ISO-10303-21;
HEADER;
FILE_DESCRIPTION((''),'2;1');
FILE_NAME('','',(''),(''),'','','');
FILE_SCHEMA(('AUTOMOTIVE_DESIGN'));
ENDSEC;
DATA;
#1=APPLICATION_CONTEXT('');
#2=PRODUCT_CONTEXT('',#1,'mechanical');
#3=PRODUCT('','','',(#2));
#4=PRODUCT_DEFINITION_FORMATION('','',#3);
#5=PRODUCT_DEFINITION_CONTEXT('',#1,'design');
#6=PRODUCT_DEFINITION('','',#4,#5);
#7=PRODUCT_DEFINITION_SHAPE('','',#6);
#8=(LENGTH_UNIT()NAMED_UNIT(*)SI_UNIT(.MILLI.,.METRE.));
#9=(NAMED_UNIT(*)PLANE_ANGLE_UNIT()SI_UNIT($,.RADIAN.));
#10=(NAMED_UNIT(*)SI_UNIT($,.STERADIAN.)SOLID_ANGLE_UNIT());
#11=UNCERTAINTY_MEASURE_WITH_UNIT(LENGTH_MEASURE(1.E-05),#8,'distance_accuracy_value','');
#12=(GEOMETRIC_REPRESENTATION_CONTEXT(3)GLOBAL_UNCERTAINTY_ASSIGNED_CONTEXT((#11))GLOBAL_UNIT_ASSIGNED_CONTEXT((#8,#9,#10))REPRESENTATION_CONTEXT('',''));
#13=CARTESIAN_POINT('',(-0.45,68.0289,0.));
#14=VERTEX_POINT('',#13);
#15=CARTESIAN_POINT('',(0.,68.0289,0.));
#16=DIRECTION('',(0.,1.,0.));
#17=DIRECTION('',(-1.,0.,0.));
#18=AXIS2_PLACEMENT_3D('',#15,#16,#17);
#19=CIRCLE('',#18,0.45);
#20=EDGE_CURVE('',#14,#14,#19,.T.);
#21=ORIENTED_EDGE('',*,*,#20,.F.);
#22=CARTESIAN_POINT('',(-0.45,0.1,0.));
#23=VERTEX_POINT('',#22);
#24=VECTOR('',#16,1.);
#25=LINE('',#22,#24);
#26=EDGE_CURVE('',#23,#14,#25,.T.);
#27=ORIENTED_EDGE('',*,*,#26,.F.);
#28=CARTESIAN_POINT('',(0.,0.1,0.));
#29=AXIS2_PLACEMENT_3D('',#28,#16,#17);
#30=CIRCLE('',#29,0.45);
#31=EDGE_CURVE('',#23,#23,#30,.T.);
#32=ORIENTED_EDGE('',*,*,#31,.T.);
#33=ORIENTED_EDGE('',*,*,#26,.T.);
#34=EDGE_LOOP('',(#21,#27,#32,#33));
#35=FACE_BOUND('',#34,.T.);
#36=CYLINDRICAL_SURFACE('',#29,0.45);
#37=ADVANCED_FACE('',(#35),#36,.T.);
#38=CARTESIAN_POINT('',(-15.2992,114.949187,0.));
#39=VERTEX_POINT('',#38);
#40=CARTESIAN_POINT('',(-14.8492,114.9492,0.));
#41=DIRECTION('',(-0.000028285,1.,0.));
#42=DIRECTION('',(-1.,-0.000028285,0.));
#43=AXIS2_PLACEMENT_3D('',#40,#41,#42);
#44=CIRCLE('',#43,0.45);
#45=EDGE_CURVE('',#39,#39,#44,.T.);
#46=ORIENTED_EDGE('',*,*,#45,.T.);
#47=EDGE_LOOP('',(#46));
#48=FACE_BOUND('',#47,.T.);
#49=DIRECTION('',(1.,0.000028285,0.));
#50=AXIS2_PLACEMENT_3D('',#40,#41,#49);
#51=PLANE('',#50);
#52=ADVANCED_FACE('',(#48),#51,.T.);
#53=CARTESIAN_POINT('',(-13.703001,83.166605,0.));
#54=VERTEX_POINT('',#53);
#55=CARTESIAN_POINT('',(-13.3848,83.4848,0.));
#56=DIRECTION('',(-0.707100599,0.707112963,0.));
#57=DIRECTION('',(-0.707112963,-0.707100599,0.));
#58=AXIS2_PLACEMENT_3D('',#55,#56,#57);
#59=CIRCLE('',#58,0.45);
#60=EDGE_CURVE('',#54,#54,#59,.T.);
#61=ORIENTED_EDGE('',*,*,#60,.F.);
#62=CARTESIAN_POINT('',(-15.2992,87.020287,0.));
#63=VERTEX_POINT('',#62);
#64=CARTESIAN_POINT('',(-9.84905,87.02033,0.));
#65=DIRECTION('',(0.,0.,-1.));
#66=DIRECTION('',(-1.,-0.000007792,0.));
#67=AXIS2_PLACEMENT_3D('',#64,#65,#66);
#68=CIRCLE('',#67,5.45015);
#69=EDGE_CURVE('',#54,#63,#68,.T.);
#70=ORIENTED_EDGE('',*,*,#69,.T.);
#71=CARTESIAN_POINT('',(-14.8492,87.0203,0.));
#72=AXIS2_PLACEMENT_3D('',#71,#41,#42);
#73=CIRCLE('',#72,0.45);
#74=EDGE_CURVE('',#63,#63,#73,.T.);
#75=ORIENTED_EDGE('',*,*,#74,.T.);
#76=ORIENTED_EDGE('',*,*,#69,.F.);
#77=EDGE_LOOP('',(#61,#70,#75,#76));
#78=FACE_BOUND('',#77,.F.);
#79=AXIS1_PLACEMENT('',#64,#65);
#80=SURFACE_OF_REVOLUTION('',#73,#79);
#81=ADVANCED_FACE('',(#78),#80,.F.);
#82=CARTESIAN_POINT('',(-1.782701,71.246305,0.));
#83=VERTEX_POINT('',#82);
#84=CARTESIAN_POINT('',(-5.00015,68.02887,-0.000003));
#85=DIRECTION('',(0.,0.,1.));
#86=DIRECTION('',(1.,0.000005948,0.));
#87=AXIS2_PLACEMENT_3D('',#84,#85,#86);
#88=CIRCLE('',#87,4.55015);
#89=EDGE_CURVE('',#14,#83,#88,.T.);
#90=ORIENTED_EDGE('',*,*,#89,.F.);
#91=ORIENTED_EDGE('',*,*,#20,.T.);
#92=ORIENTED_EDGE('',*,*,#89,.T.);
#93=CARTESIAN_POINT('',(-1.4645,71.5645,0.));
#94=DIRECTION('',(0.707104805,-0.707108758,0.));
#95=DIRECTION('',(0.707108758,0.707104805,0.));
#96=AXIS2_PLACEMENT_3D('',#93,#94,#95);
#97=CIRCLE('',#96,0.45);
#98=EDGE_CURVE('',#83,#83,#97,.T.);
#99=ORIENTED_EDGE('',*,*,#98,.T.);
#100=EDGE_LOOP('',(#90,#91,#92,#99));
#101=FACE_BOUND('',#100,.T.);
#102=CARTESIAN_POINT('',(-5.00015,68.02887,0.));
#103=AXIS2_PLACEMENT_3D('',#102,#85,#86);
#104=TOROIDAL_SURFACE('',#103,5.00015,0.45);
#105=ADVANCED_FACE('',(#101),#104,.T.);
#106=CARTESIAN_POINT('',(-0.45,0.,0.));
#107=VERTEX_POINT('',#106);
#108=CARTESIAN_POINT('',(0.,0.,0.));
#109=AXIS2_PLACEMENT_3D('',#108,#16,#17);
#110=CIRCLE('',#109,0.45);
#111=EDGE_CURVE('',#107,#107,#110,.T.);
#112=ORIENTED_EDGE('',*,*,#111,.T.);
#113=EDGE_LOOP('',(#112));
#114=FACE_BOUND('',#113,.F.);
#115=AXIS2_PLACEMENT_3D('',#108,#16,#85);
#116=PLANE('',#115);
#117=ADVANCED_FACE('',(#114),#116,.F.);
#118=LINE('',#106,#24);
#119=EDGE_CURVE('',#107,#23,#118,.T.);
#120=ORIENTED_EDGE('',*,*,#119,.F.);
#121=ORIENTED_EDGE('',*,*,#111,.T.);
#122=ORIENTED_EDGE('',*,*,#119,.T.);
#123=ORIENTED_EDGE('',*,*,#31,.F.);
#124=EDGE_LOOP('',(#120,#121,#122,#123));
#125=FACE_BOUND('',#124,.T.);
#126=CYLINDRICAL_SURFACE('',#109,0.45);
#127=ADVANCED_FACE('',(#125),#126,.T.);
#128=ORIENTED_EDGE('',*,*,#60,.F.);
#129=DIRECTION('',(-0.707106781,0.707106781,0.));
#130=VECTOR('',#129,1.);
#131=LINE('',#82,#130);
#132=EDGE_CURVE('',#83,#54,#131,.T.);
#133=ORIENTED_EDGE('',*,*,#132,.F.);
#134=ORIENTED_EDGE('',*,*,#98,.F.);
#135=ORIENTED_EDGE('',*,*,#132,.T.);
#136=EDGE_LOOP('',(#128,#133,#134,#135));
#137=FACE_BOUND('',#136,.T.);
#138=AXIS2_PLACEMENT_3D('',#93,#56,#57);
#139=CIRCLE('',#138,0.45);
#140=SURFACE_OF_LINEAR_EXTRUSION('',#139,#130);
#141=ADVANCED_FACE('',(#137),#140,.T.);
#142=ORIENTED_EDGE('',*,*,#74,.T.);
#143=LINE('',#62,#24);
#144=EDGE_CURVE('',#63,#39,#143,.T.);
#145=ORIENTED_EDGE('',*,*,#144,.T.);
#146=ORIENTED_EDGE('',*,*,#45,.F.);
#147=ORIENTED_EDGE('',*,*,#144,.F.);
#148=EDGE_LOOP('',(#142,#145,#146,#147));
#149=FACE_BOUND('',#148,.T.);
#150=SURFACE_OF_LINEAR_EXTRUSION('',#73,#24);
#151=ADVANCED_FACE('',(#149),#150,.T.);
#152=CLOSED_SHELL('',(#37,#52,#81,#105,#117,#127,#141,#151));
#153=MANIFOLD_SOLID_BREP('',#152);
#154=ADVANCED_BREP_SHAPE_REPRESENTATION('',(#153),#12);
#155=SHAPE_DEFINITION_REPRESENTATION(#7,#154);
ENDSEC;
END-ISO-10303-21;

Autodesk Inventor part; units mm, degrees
ref_plane "YZ Plane" through (0, 0, 0) normal (1, 0, 0) x (0, 1, 0)
ref_plane "XZ Plane" through (0, 0, 0) normal (0, 1, 0) x (-1, 0, 0)
ref_plane "XY Plane" through (0, 0, 0) normal (0, 0, 1) x (1, 0, 0)
sketch "Sketch1" plane through (0, 0, 0) normal (0, 1, 0) x (-1, 0, 0)
  circle A0 centre (0, 0) radius 0.45
  dimension "d0" = 0.9
sketch "Sketch2" plane through (0, 0, 0) normal (0, 0, 1) x (1, 0, 0)
  line L0 (0, 0) -> (0, 0.1)
  line L1 (0, 0.1) -> (0, 68.0289)
  line L2 (0, 70.1) -> (-27.343, 70.1) construction
  line L3 (-1.4645, 71.5645) -> (-13.3848, 83.4848)
  line L4 (-14.8492, 87.0203) -> (-14.8492, 114.9492)
  arc A0 (-14.8492, 87.0203) -> (-13.3848, 83.4848) centre (-9.8492, 87.0203) ccw
  arc A1 (0, 68.0289) -> (-1.4645, 71.5645) centre (-5, 68.0289) ccw
  point P0 (-14.8492, 84.9492)
  dimension "d1" = 0.1
  dimension "d4" = 70
  dimension "d5" = 45
  dimension "d6" = 21
  dimension "d7" = 30
  dimension "d8" = 5
  dimension "d9" = 5
sweep "Sweep2" add profiles "Sketch1" path "Sketch2"
properties part number "cable indice"
